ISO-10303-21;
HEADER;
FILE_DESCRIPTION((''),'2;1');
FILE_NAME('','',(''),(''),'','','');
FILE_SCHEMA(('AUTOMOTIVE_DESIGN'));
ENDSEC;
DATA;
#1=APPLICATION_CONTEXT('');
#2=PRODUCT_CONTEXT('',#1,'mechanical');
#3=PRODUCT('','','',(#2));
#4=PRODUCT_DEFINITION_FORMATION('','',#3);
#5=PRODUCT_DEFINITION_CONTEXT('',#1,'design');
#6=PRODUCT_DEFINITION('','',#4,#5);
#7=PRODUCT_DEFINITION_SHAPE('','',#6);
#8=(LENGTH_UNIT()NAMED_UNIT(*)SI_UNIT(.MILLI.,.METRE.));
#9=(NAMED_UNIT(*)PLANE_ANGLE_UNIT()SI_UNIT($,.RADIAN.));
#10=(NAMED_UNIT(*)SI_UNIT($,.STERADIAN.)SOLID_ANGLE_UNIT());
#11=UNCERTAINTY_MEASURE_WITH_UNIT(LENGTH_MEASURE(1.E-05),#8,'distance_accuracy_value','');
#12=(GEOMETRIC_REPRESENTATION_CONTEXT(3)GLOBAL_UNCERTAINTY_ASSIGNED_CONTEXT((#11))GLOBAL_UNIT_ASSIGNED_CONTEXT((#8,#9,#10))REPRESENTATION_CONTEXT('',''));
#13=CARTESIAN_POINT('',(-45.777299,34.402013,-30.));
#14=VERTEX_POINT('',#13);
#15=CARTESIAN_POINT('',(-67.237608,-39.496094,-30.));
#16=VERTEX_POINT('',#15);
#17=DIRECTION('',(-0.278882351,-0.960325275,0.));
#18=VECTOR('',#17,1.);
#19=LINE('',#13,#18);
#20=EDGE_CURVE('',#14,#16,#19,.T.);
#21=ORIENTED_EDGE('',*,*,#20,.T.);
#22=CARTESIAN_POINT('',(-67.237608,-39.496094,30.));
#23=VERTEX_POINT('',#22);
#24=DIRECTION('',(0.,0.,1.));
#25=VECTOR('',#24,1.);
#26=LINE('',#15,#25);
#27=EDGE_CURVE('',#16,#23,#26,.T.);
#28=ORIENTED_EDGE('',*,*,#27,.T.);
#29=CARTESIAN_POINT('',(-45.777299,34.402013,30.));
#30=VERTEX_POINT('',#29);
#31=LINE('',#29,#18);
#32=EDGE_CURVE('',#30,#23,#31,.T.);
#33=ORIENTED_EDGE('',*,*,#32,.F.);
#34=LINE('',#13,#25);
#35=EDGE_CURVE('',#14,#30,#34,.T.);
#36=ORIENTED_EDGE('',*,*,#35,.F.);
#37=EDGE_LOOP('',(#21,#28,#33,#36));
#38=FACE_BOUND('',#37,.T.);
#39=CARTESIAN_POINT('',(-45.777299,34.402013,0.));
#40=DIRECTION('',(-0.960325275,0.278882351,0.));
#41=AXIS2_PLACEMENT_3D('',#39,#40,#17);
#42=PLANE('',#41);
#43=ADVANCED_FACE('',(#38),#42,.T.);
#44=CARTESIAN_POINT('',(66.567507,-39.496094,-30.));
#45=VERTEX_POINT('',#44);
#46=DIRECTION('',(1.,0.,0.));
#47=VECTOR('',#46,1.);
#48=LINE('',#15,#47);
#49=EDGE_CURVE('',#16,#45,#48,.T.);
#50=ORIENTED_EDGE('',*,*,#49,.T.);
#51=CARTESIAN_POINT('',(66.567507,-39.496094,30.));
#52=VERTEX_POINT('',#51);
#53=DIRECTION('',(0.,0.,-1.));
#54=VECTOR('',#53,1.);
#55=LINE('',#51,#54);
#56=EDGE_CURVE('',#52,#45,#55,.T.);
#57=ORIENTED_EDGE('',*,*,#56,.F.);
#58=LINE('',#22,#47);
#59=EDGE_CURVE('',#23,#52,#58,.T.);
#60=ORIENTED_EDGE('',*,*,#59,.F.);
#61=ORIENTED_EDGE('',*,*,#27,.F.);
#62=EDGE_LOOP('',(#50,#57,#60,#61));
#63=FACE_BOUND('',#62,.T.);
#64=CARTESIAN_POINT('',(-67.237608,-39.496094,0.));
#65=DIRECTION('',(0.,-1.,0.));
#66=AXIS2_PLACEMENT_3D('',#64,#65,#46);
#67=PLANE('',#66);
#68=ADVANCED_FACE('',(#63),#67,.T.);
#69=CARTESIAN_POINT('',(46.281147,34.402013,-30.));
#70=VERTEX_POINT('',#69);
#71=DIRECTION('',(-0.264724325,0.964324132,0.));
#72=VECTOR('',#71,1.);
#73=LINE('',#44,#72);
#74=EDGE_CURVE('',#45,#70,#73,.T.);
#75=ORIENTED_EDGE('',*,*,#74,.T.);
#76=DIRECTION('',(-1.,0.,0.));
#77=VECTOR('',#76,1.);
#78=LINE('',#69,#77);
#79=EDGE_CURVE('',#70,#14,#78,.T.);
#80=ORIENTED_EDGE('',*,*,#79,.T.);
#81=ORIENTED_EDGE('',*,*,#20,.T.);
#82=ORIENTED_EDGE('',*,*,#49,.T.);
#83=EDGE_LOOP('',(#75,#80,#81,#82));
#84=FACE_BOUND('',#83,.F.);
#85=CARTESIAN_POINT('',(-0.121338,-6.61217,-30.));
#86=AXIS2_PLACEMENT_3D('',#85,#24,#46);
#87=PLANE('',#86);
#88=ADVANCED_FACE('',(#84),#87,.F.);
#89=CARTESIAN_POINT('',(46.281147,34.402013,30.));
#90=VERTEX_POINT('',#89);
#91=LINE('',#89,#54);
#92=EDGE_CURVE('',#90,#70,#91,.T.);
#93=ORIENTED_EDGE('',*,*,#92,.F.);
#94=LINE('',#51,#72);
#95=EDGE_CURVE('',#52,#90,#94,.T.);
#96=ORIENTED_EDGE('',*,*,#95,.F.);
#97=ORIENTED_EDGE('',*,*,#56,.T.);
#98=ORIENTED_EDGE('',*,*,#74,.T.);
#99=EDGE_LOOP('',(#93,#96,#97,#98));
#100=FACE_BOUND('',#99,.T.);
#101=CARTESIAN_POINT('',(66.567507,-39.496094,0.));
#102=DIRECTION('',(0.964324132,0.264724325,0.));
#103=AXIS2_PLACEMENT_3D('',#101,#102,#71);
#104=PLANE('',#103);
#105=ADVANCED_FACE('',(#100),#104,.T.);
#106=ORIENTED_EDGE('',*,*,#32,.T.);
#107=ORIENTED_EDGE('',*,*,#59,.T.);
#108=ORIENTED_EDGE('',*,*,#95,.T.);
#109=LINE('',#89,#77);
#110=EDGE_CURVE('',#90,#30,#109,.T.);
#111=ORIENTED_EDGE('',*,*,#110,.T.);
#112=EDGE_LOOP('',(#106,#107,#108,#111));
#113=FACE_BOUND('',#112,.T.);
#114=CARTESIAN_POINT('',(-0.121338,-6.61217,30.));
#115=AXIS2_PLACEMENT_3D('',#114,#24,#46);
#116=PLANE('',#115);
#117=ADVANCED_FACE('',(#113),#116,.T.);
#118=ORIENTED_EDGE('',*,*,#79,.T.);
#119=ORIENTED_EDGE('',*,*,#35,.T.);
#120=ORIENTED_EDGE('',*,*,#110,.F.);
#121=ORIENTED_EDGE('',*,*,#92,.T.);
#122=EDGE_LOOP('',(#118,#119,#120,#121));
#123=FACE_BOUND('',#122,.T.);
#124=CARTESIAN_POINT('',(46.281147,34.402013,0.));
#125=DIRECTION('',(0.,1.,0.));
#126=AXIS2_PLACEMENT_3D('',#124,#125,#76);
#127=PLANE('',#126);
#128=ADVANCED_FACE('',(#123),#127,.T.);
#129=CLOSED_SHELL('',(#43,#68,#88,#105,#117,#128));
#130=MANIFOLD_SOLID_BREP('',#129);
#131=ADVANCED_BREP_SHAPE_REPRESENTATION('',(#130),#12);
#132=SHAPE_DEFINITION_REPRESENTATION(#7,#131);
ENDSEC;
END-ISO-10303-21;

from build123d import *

# Parameters (mm, degrees)
F1_DEPTH = 30


# Not quite as in the source:
# - a feature names something its author has since deleted; it is built from what else it names


with BuildPart() as f1:
    # F0 (on Top) → F1 (new body, symmetric)
    with BuildSketch(Plane.XY):
        Polygon((46.2811469248, 34.402012825), (-45.7772985101, 34.402012825), (-67.2376081347, -39.4960939884), (66.567506886, -39.4960939884), align=None)
    extrude(amount=F1_DEPTH, both=True)


solid = f1.part
